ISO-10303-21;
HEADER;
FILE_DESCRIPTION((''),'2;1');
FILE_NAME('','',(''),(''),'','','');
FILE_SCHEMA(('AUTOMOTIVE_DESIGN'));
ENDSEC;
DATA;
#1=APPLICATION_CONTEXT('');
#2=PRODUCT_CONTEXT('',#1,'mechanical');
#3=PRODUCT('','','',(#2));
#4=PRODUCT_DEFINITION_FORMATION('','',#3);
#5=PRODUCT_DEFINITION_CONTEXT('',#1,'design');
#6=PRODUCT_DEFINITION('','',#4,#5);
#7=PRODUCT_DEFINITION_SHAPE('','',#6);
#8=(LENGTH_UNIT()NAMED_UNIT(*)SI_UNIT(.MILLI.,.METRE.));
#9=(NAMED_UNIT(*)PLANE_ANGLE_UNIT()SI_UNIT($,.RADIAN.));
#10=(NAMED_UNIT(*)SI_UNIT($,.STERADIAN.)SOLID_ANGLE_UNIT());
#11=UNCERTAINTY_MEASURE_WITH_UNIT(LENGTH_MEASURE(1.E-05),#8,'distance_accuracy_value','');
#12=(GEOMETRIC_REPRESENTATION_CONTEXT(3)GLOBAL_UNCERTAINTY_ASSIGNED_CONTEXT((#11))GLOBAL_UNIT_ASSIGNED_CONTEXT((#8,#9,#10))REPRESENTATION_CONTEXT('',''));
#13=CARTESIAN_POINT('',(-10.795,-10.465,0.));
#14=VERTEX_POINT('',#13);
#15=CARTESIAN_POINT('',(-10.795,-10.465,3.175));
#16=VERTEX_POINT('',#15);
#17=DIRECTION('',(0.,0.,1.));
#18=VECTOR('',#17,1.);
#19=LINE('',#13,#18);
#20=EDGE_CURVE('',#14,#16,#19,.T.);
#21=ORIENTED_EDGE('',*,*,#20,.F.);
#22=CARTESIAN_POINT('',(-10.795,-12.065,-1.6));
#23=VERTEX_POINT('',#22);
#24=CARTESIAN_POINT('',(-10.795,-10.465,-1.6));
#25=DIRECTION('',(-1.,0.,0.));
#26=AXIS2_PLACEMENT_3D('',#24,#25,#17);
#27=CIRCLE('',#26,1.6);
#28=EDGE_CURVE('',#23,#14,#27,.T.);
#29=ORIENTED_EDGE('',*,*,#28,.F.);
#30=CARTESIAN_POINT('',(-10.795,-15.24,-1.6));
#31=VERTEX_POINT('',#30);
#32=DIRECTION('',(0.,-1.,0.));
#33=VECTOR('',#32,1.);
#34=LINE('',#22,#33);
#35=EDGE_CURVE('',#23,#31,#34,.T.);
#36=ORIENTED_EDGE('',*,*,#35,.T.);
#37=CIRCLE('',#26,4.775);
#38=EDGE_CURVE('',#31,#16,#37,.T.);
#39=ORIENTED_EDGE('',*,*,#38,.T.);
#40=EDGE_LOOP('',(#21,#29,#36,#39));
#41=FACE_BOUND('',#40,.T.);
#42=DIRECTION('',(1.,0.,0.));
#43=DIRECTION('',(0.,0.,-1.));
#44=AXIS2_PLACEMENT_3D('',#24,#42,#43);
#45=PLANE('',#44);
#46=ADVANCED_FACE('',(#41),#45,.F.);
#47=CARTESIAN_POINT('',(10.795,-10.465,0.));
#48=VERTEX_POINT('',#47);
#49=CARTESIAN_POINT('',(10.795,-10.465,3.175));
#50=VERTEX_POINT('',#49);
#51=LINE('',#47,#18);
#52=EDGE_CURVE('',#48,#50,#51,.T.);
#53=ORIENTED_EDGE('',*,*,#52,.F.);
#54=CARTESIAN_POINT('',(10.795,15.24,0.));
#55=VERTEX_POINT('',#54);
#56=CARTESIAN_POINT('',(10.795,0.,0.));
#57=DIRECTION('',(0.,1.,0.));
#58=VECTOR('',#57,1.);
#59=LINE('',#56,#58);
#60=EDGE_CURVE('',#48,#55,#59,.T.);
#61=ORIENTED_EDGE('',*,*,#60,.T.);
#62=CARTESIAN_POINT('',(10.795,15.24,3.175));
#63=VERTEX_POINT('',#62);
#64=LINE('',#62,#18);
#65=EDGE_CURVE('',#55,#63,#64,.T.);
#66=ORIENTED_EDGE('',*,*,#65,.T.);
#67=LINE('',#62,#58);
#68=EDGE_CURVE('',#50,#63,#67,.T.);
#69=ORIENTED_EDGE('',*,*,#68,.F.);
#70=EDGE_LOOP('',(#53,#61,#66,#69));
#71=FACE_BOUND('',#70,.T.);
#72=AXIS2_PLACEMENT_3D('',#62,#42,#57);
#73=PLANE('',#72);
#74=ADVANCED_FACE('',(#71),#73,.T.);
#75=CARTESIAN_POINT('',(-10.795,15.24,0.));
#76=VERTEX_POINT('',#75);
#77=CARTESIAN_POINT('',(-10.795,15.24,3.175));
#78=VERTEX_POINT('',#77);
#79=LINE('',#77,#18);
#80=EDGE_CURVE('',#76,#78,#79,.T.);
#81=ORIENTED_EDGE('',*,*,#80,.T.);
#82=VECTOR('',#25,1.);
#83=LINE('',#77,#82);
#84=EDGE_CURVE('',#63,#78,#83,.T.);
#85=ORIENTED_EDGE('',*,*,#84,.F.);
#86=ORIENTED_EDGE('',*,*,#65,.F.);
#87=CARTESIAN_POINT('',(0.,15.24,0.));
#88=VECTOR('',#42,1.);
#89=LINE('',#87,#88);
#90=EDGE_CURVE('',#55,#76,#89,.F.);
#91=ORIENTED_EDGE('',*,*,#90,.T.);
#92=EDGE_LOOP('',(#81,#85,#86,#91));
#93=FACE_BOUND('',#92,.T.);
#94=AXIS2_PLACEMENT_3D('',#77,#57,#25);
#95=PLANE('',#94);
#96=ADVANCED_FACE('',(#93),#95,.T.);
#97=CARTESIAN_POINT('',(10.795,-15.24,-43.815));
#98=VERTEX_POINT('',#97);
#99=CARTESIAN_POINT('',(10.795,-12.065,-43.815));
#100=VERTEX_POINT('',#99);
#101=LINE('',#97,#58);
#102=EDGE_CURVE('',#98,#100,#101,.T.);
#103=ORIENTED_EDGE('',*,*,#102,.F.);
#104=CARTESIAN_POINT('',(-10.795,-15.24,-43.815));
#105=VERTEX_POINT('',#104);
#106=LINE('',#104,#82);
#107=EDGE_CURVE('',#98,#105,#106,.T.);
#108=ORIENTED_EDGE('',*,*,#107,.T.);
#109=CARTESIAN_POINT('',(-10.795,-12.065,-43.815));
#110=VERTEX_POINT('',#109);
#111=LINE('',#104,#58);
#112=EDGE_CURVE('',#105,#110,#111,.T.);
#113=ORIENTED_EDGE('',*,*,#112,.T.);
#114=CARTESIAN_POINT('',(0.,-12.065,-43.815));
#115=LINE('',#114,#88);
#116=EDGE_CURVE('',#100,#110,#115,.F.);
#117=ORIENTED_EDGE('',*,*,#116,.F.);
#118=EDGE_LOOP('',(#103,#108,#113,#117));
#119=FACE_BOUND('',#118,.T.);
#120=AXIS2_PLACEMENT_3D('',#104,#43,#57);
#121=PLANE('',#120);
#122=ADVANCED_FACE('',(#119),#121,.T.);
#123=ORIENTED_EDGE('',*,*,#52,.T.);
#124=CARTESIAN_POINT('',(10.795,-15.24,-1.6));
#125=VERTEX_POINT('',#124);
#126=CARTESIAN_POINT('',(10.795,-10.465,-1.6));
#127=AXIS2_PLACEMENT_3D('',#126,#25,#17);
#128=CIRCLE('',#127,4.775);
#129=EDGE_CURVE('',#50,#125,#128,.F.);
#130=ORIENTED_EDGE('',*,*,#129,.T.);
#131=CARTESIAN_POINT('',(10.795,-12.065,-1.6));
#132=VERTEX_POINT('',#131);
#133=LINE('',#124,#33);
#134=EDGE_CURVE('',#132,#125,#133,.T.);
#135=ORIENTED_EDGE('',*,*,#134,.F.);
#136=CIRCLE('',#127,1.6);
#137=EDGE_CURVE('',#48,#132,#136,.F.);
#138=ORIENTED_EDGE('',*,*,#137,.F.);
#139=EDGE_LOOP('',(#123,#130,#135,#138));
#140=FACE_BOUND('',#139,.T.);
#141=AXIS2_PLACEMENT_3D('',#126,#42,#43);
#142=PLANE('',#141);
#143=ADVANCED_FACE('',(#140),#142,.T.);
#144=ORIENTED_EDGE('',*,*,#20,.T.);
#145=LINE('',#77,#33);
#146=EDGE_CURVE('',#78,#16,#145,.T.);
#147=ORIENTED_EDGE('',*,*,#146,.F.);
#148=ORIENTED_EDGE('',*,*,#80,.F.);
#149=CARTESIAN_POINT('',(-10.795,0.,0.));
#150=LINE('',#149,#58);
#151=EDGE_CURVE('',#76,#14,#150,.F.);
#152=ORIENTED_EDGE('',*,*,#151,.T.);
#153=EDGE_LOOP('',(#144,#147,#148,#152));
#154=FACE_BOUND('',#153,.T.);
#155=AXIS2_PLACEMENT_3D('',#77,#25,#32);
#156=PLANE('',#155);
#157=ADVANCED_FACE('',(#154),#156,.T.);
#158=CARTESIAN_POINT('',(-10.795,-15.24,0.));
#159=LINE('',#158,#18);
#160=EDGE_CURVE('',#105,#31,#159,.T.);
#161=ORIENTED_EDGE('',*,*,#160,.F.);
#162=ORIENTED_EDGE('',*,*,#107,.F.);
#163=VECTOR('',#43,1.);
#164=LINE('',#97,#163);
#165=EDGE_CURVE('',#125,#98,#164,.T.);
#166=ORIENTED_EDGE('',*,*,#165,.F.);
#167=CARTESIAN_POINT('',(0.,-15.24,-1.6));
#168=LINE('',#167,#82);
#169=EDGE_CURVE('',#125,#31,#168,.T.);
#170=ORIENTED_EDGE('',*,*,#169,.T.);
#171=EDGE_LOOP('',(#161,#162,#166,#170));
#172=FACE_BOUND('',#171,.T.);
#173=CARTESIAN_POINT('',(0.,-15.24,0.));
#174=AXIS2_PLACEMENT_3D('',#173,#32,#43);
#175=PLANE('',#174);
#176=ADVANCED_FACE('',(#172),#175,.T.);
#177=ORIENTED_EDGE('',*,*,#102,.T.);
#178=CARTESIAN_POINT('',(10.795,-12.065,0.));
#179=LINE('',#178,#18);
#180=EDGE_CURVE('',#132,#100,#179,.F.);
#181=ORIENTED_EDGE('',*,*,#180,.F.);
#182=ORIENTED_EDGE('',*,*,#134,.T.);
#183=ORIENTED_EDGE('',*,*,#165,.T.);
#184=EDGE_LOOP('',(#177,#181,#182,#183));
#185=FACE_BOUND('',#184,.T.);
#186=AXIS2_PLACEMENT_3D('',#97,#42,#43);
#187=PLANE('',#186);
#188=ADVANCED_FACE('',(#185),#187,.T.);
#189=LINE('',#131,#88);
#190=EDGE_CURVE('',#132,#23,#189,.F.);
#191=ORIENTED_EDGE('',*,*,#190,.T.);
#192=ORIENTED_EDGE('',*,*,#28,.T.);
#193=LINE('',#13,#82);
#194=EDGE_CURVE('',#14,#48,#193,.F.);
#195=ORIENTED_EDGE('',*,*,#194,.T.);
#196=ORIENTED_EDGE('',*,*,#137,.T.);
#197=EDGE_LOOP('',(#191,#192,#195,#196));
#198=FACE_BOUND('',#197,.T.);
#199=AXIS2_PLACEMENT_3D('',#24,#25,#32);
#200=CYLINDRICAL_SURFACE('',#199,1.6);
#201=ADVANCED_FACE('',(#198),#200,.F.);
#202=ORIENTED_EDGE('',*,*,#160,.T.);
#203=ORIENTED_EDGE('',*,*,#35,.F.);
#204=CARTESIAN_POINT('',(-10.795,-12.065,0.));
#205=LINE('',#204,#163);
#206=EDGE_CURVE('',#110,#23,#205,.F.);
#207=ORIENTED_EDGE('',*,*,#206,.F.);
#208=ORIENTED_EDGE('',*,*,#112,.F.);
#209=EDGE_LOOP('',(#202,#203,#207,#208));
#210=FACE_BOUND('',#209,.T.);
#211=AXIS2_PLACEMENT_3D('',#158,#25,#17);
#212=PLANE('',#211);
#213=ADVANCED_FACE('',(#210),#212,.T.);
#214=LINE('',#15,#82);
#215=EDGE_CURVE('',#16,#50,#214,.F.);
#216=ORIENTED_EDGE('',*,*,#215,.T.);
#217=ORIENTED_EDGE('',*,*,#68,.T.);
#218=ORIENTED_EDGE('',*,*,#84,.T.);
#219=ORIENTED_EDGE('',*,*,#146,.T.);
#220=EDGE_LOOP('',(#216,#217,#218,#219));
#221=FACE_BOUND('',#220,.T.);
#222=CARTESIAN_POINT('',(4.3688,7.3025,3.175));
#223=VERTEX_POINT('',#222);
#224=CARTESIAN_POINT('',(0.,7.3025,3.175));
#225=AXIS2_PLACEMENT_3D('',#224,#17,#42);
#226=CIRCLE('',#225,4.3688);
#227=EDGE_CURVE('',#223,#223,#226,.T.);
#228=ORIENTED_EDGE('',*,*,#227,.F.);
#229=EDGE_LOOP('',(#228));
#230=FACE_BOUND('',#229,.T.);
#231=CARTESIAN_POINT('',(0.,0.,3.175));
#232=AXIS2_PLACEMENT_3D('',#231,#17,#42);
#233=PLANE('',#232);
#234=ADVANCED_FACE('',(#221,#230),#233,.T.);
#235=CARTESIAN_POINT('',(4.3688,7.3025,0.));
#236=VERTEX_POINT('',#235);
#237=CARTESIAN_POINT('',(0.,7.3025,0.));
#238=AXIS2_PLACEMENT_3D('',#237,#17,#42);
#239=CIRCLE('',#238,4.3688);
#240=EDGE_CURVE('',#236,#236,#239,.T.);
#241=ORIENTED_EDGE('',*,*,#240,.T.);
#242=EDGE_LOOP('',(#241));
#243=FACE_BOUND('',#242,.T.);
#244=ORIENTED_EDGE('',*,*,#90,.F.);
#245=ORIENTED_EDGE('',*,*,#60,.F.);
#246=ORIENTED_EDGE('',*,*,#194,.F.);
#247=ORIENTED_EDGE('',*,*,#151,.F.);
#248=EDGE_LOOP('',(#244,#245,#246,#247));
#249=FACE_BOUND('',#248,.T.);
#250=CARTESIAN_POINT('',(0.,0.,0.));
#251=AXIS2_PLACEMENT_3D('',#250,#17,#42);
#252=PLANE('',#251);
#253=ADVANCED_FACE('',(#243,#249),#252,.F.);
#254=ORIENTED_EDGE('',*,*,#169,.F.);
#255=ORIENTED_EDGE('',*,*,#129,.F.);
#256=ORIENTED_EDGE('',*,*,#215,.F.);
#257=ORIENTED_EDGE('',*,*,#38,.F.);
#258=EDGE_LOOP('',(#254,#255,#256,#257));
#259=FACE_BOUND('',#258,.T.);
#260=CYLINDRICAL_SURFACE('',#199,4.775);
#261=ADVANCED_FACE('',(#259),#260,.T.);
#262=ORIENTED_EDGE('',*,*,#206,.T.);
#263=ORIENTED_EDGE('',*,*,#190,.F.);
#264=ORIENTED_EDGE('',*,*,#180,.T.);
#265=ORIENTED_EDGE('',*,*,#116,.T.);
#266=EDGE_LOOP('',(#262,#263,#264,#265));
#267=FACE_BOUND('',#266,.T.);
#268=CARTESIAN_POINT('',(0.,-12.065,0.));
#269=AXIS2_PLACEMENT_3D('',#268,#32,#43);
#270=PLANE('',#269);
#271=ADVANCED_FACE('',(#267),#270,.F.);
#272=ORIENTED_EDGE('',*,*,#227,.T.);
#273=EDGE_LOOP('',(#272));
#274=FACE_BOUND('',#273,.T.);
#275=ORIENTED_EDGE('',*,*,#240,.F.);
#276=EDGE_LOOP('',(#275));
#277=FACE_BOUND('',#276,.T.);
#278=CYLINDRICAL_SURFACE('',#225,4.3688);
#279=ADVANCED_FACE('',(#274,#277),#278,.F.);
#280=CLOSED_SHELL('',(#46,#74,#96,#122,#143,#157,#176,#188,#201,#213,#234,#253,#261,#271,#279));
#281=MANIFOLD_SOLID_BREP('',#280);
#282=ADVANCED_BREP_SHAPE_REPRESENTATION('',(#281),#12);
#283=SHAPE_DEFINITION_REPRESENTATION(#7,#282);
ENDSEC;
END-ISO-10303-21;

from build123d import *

# Parameters (mm, degrees)
SKETCH1_R                    = 4.3688
BOSS_EXTRUDE1_DEPTH          = 3.175
EDGE_FLANGE1_STRIP_W         = 15.900000204
EDGE_FLANGE1_STRIP_H         = 3.175
EDGE_FLANGE1_STRIP_CUT_DEPTH = 21.59
EDGE_FLANGE1_DEPTH           = 21.59
EDGE_FLANGE1_FLAT_DEPTH      = 3.175


# Sheet-metal steps are written as plain solids
with BuildPart() as part:
    # Sketch1 → Boss-Extrude1 (new body)
    with BuildSketch(Plane.XY):
        Polygon((-10.795, 15.24), (10.795, 15.24), (10.795, -15.24), (-10.795, -15.24), (-10.795, -1.27), align=None)
        with Locations((0, 7.3025)):
            Circle(SKETCH1_R, mode=Mode.SUBTRACT)
    extrude(amount=BOSS_EXTRUDE1_DEPTH)

    # Edge-Flange1 strip (across the edge) → Edge-Flange1 strip cut (cut)
    with BuildSketch(Plane(origin=(10.795, -15.24, 0), x_dir=(0, 1, 0), z_dir=(-1, 0, 0))):
        with Locations((-3.175, -1.5875)):
            Rectangle(EDGE_FLANGE1_STRIP_W, EDGE_FLANGE1_STRIP_H)
    extrude(amount=EDGE_FLANGE1_STRIP_CUT_DEPTH, mode=Mode.SUBTRACT)

    # Edge-Flange1 bend section (across the edge) → Edge-Flange1 (add)
    with BuildSketch(Plane(origin=(10.795, -15.24, 0), x_dir=(0, 1, 0), z_dir=(-1, 0, 0))):
        with BuildLine():
            Line((0, 1.600000102), (3.175, 1.600000102))
            ThreePointArc((3.175, 1.600000102), (3.64362918, 0.46862918), (4.775000102, 0))
            Line((4.775000102, 0), (4.775000102, -3.175))
            ThreePointArc((4.775000102, -3.175), (1.39856515, -1.77643485), (0, 1.600000102))
        make_face()
    extrude(amount=EDGE_FLANGE1_DEPTH)

    # Edge-Flange1 profile (on flange) → Edge-Flange1 flat (add)
    with BuildSketch(Plane(origin=(0, -15.24, 0), x_dir=(1, 0, 0), z_dir=(0, 1, 0))):
        Polygon((-10.795, 1.600000102), (10.795, 1.600000102), (10.795, 13.335), (10.795, 34.925), (10.795, 43.815), (-10.795, 43.815), (-10.795, 34.925), (-10.795, 13.335), align=None)
    extrude(amount=EDGE_FLANGE1_FLAT_DEPTH)


solid = part.part
